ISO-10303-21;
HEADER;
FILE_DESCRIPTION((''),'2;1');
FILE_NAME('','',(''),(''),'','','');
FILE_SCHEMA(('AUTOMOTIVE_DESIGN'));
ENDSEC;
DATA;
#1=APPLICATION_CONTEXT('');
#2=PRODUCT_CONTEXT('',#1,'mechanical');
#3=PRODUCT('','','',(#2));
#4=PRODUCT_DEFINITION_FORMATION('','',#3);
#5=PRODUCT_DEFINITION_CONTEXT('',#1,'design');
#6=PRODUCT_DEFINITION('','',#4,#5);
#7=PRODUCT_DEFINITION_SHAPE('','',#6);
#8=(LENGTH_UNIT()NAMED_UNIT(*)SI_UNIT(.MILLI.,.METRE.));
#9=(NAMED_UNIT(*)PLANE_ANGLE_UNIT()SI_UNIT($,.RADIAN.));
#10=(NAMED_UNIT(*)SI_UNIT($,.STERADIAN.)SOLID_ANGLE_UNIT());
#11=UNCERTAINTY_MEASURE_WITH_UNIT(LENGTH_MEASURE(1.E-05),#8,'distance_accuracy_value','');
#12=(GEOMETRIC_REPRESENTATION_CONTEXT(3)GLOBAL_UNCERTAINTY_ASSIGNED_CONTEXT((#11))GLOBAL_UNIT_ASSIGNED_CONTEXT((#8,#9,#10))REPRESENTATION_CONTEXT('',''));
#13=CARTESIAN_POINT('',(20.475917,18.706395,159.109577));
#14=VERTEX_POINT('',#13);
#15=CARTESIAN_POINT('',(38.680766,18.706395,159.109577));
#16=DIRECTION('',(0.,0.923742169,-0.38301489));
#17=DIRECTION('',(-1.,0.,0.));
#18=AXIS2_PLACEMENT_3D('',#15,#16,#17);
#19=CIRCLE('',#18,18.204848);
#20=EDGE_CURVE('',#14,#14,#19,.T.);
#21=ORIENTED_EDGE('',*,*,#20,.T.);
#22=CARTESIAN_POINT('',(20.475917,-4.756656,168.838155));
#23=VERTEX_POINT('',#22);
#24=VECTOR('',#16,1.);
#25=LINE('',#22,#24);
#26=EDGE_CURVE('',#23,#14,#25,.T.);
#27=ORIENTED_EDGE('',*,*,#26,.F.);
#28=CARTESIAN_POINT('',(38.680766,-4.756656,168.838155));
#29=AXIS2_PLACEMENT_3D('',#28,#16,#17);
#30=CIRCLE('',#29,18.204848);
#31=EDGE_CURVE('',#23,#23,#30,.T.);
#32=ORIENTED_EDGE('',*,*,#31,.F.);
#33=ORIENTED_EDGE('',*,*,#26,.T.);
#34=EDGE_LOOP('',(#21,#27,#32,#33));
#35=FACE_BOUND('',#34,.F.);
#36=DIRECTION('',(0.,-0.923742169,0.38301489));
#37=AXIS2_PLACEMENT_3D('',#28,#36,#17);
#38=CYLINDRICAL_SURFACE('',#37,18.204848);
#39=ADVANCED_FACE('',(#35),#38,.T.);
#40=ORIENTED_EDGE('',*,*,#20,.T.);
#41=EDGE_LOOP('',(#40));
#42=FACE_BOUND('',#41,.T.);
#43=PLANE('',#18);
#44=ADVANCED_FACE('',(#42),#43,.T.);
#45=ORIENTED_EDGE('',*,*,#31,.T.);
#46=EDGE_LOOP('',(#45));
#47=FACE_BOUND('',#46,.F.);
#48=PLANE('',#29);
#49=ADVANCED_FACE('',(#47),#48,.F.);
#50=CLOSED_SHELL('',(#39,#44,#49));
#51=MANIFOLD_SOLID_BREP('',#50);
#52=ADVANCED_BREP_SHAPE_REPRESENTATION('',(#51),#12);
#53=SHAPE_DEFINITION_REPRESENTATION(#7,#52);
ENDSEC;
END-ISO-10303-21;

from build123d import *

# Parameters (mm, degrees)
F4_DEPTH     = 31.75
F6_DEPTH     = 80.772
F7_W         = 115.0478571653
F7_H         = 280.0295129418
F8_DEPTH     = 80.01
F10_R        = 5.08
F11_R        = 5.08
F12_R        = 1.27
F13_T4_DEPTH = 185.7457951761
F13_T9_DEPTH = 185.7457951761
F15_R        = 18.2048484519
F16_DEPTH    = 25.4


# Not quite as in the source:
# - a fillet or chamfer that OpenCascade refuses, or shapes differently, is made with other operations: its cross-section is extruded or revolved along the edge and cut away or added
# - a feature of the source that left no trace in its solid (it failed there, or was rolled back) is left out


with BuildPart() as f4:
    # F3 (on Right) → F4 (new body, symmetric)
    with BuildSketch(Plane.YZ):
        Polygon((33.4092862904, 0), (34.8578840494, 0), (34.8578840494, 165.3004437685), (51.5383556485, 200.2867460251), (45.9728437156, 202.9402234647), (21.1225822568, 165.3004437685), align=None)
    extrude(amount=F4_DEPTH, both=True)

    # F5 (on Front) → F6 (cut, symmetric)
    with BuildSketch(Plane.XZ):
        Polygon((-36.7620885372, 0), (-2.4731955491, 0), (-9.2842681333, 165.0800704956), (-36.7620885372, 165.0800704956), align=None)
    extrude(amount=F6_DEPTH, both=True, mode=Mode.SUBTRACT)

    # F7 (on Front) → F8 (cut)
    with BuildSketch(Plane.XZ):
        with Locations((57.5239285827, 90.4524587095)):
            Rectangle(F7_W, F7_H)
    extrude(amount=-F8_DEPTH, mode=Mode.SUBTRACT)

    # F9: F4 across face


with BuildPart() as f4_1:
    add(f4.part)
    add(f4.part.mirror(Plane(origin=(0, 31.8435446529, 122.6723093361), x_dir=(0, 1, 0), z_dir=(1, 0, 0))))

    # F10
    f10_edges = [f4_1.edges().sort_by_distance(p)[0] for p in [
        (-9.284268, 27.998423, 165.08007),
        (9.284268, 27.998423, 165.08007),
        (31.75, 27.998423, 165.08007),
        (-31.75, 27.998423, 165.08007),
    ]]
    fillet(f10_edges, radius=F10_R)

    # F11
    f11_edges = [f4_1.edges().sort_by_distance(p)[0] for p in [
        (-31.75, 48.7556, 201.613485),
        (31.75, 48.7556, 201.613485),
    ]]
    fillet(f11_edges, radius=F11_R)

    # F12
    f12_edges = [f4_1.edges().sort_by_distance(p)[0] for p in [
        (-31.75, 33.738898, 184.409914),
    ]]
    fillet(f12_edges, radius=F12_R)

    # F13: fillet of radius 5.08 on 2 edges, made by hand


with BuildPart() as f13_tool2:
    # F13_s3 → F13_t4 (new body)
    with BuildSketch(Plane(origin=(7.1378657639, 0, 173.0005617946), x_dir=(0, 1, 0), z_dir=(-0.0412241322, 0, -0.9991499241))):
        with BuildLine():
            ThreePointArc((29.7778840494, 2.4710931453), (33.3699864978, 0.9831955937), (34.8578840494, -2.6089068547))
            Line((34.8578840494, -2.6089068547), (34.8578840494, 2.4710931453))
            Line((34.8578840494, 2.4710931453), (29.7778840494, 2.4710931453))
        make_face()
    extrude(amount=F13_T4_DEPTH)

    split(bisect_by=Plane(origin=(0, -35.8121563615, 17.0742152946), x_dir=(1, 0, 0), z_dir=(0, 0.902656838, -0.4303610493)), keep=Keep.TOP)


with BuildPart() as f4_2:
    add(f4_1.part)

    # F13_t1: cut F13_tool2
    add(f13_tool2.part, mode=Mode.SUBTRACT)


with BuildPart() as f13_tool7:
    # F13_s8 → F13_t9 (new body)
    with BuildSketch(Plane(origin=(-7.1378657639, 0, 173.0005617946), x_dir=(0, 1, 0), z_dir=(0.0412241322, 0, -0.9991499241))):
        with BuildLine():
            ThreePointArc((29.7778840494, -2.4710931453), (33.3699864978, -0.9831955937), (34.8578840494, 2.6089068547))
            Line((34.8578840494, 2.6089068547), (34.8578840494, -2.4710931453))
            Line((34.8578840494, -2.4710931453), (29.7778840494, -2.4710931453))
        make_face()
    extrude(amount=F13_T9_DEPTH)

    split(bisect_by=Plane(origin=(0, -35.8121563615, 17.0742152946), x_dir=(1, 0, 0), z_dir=(0, 0.902656838, -0.4303610493)), keep=Keep.TOP)


with BuildPart() as f4_3:
    add(f4_2.part)

    # F13_t6: cut F13_tool7
    add(f13_tool7.part, mode=Mode.SUBTRACT)


with BuildPart() as f16:
    # F15 (on line) → F16 (new body)
    with BuildSketch(Plane(origin=(0, -63.794974886, 26.4515642177), x_dir=(-1, 0, 0), z_dir=(0, 0.9237421686, -0.3830148901))):
        with Locations((-38.6807657778, 154.1410535574)):
            Circle(F15_R)
    extrude(amount=F16_DEPTH)


solid = f16.part
